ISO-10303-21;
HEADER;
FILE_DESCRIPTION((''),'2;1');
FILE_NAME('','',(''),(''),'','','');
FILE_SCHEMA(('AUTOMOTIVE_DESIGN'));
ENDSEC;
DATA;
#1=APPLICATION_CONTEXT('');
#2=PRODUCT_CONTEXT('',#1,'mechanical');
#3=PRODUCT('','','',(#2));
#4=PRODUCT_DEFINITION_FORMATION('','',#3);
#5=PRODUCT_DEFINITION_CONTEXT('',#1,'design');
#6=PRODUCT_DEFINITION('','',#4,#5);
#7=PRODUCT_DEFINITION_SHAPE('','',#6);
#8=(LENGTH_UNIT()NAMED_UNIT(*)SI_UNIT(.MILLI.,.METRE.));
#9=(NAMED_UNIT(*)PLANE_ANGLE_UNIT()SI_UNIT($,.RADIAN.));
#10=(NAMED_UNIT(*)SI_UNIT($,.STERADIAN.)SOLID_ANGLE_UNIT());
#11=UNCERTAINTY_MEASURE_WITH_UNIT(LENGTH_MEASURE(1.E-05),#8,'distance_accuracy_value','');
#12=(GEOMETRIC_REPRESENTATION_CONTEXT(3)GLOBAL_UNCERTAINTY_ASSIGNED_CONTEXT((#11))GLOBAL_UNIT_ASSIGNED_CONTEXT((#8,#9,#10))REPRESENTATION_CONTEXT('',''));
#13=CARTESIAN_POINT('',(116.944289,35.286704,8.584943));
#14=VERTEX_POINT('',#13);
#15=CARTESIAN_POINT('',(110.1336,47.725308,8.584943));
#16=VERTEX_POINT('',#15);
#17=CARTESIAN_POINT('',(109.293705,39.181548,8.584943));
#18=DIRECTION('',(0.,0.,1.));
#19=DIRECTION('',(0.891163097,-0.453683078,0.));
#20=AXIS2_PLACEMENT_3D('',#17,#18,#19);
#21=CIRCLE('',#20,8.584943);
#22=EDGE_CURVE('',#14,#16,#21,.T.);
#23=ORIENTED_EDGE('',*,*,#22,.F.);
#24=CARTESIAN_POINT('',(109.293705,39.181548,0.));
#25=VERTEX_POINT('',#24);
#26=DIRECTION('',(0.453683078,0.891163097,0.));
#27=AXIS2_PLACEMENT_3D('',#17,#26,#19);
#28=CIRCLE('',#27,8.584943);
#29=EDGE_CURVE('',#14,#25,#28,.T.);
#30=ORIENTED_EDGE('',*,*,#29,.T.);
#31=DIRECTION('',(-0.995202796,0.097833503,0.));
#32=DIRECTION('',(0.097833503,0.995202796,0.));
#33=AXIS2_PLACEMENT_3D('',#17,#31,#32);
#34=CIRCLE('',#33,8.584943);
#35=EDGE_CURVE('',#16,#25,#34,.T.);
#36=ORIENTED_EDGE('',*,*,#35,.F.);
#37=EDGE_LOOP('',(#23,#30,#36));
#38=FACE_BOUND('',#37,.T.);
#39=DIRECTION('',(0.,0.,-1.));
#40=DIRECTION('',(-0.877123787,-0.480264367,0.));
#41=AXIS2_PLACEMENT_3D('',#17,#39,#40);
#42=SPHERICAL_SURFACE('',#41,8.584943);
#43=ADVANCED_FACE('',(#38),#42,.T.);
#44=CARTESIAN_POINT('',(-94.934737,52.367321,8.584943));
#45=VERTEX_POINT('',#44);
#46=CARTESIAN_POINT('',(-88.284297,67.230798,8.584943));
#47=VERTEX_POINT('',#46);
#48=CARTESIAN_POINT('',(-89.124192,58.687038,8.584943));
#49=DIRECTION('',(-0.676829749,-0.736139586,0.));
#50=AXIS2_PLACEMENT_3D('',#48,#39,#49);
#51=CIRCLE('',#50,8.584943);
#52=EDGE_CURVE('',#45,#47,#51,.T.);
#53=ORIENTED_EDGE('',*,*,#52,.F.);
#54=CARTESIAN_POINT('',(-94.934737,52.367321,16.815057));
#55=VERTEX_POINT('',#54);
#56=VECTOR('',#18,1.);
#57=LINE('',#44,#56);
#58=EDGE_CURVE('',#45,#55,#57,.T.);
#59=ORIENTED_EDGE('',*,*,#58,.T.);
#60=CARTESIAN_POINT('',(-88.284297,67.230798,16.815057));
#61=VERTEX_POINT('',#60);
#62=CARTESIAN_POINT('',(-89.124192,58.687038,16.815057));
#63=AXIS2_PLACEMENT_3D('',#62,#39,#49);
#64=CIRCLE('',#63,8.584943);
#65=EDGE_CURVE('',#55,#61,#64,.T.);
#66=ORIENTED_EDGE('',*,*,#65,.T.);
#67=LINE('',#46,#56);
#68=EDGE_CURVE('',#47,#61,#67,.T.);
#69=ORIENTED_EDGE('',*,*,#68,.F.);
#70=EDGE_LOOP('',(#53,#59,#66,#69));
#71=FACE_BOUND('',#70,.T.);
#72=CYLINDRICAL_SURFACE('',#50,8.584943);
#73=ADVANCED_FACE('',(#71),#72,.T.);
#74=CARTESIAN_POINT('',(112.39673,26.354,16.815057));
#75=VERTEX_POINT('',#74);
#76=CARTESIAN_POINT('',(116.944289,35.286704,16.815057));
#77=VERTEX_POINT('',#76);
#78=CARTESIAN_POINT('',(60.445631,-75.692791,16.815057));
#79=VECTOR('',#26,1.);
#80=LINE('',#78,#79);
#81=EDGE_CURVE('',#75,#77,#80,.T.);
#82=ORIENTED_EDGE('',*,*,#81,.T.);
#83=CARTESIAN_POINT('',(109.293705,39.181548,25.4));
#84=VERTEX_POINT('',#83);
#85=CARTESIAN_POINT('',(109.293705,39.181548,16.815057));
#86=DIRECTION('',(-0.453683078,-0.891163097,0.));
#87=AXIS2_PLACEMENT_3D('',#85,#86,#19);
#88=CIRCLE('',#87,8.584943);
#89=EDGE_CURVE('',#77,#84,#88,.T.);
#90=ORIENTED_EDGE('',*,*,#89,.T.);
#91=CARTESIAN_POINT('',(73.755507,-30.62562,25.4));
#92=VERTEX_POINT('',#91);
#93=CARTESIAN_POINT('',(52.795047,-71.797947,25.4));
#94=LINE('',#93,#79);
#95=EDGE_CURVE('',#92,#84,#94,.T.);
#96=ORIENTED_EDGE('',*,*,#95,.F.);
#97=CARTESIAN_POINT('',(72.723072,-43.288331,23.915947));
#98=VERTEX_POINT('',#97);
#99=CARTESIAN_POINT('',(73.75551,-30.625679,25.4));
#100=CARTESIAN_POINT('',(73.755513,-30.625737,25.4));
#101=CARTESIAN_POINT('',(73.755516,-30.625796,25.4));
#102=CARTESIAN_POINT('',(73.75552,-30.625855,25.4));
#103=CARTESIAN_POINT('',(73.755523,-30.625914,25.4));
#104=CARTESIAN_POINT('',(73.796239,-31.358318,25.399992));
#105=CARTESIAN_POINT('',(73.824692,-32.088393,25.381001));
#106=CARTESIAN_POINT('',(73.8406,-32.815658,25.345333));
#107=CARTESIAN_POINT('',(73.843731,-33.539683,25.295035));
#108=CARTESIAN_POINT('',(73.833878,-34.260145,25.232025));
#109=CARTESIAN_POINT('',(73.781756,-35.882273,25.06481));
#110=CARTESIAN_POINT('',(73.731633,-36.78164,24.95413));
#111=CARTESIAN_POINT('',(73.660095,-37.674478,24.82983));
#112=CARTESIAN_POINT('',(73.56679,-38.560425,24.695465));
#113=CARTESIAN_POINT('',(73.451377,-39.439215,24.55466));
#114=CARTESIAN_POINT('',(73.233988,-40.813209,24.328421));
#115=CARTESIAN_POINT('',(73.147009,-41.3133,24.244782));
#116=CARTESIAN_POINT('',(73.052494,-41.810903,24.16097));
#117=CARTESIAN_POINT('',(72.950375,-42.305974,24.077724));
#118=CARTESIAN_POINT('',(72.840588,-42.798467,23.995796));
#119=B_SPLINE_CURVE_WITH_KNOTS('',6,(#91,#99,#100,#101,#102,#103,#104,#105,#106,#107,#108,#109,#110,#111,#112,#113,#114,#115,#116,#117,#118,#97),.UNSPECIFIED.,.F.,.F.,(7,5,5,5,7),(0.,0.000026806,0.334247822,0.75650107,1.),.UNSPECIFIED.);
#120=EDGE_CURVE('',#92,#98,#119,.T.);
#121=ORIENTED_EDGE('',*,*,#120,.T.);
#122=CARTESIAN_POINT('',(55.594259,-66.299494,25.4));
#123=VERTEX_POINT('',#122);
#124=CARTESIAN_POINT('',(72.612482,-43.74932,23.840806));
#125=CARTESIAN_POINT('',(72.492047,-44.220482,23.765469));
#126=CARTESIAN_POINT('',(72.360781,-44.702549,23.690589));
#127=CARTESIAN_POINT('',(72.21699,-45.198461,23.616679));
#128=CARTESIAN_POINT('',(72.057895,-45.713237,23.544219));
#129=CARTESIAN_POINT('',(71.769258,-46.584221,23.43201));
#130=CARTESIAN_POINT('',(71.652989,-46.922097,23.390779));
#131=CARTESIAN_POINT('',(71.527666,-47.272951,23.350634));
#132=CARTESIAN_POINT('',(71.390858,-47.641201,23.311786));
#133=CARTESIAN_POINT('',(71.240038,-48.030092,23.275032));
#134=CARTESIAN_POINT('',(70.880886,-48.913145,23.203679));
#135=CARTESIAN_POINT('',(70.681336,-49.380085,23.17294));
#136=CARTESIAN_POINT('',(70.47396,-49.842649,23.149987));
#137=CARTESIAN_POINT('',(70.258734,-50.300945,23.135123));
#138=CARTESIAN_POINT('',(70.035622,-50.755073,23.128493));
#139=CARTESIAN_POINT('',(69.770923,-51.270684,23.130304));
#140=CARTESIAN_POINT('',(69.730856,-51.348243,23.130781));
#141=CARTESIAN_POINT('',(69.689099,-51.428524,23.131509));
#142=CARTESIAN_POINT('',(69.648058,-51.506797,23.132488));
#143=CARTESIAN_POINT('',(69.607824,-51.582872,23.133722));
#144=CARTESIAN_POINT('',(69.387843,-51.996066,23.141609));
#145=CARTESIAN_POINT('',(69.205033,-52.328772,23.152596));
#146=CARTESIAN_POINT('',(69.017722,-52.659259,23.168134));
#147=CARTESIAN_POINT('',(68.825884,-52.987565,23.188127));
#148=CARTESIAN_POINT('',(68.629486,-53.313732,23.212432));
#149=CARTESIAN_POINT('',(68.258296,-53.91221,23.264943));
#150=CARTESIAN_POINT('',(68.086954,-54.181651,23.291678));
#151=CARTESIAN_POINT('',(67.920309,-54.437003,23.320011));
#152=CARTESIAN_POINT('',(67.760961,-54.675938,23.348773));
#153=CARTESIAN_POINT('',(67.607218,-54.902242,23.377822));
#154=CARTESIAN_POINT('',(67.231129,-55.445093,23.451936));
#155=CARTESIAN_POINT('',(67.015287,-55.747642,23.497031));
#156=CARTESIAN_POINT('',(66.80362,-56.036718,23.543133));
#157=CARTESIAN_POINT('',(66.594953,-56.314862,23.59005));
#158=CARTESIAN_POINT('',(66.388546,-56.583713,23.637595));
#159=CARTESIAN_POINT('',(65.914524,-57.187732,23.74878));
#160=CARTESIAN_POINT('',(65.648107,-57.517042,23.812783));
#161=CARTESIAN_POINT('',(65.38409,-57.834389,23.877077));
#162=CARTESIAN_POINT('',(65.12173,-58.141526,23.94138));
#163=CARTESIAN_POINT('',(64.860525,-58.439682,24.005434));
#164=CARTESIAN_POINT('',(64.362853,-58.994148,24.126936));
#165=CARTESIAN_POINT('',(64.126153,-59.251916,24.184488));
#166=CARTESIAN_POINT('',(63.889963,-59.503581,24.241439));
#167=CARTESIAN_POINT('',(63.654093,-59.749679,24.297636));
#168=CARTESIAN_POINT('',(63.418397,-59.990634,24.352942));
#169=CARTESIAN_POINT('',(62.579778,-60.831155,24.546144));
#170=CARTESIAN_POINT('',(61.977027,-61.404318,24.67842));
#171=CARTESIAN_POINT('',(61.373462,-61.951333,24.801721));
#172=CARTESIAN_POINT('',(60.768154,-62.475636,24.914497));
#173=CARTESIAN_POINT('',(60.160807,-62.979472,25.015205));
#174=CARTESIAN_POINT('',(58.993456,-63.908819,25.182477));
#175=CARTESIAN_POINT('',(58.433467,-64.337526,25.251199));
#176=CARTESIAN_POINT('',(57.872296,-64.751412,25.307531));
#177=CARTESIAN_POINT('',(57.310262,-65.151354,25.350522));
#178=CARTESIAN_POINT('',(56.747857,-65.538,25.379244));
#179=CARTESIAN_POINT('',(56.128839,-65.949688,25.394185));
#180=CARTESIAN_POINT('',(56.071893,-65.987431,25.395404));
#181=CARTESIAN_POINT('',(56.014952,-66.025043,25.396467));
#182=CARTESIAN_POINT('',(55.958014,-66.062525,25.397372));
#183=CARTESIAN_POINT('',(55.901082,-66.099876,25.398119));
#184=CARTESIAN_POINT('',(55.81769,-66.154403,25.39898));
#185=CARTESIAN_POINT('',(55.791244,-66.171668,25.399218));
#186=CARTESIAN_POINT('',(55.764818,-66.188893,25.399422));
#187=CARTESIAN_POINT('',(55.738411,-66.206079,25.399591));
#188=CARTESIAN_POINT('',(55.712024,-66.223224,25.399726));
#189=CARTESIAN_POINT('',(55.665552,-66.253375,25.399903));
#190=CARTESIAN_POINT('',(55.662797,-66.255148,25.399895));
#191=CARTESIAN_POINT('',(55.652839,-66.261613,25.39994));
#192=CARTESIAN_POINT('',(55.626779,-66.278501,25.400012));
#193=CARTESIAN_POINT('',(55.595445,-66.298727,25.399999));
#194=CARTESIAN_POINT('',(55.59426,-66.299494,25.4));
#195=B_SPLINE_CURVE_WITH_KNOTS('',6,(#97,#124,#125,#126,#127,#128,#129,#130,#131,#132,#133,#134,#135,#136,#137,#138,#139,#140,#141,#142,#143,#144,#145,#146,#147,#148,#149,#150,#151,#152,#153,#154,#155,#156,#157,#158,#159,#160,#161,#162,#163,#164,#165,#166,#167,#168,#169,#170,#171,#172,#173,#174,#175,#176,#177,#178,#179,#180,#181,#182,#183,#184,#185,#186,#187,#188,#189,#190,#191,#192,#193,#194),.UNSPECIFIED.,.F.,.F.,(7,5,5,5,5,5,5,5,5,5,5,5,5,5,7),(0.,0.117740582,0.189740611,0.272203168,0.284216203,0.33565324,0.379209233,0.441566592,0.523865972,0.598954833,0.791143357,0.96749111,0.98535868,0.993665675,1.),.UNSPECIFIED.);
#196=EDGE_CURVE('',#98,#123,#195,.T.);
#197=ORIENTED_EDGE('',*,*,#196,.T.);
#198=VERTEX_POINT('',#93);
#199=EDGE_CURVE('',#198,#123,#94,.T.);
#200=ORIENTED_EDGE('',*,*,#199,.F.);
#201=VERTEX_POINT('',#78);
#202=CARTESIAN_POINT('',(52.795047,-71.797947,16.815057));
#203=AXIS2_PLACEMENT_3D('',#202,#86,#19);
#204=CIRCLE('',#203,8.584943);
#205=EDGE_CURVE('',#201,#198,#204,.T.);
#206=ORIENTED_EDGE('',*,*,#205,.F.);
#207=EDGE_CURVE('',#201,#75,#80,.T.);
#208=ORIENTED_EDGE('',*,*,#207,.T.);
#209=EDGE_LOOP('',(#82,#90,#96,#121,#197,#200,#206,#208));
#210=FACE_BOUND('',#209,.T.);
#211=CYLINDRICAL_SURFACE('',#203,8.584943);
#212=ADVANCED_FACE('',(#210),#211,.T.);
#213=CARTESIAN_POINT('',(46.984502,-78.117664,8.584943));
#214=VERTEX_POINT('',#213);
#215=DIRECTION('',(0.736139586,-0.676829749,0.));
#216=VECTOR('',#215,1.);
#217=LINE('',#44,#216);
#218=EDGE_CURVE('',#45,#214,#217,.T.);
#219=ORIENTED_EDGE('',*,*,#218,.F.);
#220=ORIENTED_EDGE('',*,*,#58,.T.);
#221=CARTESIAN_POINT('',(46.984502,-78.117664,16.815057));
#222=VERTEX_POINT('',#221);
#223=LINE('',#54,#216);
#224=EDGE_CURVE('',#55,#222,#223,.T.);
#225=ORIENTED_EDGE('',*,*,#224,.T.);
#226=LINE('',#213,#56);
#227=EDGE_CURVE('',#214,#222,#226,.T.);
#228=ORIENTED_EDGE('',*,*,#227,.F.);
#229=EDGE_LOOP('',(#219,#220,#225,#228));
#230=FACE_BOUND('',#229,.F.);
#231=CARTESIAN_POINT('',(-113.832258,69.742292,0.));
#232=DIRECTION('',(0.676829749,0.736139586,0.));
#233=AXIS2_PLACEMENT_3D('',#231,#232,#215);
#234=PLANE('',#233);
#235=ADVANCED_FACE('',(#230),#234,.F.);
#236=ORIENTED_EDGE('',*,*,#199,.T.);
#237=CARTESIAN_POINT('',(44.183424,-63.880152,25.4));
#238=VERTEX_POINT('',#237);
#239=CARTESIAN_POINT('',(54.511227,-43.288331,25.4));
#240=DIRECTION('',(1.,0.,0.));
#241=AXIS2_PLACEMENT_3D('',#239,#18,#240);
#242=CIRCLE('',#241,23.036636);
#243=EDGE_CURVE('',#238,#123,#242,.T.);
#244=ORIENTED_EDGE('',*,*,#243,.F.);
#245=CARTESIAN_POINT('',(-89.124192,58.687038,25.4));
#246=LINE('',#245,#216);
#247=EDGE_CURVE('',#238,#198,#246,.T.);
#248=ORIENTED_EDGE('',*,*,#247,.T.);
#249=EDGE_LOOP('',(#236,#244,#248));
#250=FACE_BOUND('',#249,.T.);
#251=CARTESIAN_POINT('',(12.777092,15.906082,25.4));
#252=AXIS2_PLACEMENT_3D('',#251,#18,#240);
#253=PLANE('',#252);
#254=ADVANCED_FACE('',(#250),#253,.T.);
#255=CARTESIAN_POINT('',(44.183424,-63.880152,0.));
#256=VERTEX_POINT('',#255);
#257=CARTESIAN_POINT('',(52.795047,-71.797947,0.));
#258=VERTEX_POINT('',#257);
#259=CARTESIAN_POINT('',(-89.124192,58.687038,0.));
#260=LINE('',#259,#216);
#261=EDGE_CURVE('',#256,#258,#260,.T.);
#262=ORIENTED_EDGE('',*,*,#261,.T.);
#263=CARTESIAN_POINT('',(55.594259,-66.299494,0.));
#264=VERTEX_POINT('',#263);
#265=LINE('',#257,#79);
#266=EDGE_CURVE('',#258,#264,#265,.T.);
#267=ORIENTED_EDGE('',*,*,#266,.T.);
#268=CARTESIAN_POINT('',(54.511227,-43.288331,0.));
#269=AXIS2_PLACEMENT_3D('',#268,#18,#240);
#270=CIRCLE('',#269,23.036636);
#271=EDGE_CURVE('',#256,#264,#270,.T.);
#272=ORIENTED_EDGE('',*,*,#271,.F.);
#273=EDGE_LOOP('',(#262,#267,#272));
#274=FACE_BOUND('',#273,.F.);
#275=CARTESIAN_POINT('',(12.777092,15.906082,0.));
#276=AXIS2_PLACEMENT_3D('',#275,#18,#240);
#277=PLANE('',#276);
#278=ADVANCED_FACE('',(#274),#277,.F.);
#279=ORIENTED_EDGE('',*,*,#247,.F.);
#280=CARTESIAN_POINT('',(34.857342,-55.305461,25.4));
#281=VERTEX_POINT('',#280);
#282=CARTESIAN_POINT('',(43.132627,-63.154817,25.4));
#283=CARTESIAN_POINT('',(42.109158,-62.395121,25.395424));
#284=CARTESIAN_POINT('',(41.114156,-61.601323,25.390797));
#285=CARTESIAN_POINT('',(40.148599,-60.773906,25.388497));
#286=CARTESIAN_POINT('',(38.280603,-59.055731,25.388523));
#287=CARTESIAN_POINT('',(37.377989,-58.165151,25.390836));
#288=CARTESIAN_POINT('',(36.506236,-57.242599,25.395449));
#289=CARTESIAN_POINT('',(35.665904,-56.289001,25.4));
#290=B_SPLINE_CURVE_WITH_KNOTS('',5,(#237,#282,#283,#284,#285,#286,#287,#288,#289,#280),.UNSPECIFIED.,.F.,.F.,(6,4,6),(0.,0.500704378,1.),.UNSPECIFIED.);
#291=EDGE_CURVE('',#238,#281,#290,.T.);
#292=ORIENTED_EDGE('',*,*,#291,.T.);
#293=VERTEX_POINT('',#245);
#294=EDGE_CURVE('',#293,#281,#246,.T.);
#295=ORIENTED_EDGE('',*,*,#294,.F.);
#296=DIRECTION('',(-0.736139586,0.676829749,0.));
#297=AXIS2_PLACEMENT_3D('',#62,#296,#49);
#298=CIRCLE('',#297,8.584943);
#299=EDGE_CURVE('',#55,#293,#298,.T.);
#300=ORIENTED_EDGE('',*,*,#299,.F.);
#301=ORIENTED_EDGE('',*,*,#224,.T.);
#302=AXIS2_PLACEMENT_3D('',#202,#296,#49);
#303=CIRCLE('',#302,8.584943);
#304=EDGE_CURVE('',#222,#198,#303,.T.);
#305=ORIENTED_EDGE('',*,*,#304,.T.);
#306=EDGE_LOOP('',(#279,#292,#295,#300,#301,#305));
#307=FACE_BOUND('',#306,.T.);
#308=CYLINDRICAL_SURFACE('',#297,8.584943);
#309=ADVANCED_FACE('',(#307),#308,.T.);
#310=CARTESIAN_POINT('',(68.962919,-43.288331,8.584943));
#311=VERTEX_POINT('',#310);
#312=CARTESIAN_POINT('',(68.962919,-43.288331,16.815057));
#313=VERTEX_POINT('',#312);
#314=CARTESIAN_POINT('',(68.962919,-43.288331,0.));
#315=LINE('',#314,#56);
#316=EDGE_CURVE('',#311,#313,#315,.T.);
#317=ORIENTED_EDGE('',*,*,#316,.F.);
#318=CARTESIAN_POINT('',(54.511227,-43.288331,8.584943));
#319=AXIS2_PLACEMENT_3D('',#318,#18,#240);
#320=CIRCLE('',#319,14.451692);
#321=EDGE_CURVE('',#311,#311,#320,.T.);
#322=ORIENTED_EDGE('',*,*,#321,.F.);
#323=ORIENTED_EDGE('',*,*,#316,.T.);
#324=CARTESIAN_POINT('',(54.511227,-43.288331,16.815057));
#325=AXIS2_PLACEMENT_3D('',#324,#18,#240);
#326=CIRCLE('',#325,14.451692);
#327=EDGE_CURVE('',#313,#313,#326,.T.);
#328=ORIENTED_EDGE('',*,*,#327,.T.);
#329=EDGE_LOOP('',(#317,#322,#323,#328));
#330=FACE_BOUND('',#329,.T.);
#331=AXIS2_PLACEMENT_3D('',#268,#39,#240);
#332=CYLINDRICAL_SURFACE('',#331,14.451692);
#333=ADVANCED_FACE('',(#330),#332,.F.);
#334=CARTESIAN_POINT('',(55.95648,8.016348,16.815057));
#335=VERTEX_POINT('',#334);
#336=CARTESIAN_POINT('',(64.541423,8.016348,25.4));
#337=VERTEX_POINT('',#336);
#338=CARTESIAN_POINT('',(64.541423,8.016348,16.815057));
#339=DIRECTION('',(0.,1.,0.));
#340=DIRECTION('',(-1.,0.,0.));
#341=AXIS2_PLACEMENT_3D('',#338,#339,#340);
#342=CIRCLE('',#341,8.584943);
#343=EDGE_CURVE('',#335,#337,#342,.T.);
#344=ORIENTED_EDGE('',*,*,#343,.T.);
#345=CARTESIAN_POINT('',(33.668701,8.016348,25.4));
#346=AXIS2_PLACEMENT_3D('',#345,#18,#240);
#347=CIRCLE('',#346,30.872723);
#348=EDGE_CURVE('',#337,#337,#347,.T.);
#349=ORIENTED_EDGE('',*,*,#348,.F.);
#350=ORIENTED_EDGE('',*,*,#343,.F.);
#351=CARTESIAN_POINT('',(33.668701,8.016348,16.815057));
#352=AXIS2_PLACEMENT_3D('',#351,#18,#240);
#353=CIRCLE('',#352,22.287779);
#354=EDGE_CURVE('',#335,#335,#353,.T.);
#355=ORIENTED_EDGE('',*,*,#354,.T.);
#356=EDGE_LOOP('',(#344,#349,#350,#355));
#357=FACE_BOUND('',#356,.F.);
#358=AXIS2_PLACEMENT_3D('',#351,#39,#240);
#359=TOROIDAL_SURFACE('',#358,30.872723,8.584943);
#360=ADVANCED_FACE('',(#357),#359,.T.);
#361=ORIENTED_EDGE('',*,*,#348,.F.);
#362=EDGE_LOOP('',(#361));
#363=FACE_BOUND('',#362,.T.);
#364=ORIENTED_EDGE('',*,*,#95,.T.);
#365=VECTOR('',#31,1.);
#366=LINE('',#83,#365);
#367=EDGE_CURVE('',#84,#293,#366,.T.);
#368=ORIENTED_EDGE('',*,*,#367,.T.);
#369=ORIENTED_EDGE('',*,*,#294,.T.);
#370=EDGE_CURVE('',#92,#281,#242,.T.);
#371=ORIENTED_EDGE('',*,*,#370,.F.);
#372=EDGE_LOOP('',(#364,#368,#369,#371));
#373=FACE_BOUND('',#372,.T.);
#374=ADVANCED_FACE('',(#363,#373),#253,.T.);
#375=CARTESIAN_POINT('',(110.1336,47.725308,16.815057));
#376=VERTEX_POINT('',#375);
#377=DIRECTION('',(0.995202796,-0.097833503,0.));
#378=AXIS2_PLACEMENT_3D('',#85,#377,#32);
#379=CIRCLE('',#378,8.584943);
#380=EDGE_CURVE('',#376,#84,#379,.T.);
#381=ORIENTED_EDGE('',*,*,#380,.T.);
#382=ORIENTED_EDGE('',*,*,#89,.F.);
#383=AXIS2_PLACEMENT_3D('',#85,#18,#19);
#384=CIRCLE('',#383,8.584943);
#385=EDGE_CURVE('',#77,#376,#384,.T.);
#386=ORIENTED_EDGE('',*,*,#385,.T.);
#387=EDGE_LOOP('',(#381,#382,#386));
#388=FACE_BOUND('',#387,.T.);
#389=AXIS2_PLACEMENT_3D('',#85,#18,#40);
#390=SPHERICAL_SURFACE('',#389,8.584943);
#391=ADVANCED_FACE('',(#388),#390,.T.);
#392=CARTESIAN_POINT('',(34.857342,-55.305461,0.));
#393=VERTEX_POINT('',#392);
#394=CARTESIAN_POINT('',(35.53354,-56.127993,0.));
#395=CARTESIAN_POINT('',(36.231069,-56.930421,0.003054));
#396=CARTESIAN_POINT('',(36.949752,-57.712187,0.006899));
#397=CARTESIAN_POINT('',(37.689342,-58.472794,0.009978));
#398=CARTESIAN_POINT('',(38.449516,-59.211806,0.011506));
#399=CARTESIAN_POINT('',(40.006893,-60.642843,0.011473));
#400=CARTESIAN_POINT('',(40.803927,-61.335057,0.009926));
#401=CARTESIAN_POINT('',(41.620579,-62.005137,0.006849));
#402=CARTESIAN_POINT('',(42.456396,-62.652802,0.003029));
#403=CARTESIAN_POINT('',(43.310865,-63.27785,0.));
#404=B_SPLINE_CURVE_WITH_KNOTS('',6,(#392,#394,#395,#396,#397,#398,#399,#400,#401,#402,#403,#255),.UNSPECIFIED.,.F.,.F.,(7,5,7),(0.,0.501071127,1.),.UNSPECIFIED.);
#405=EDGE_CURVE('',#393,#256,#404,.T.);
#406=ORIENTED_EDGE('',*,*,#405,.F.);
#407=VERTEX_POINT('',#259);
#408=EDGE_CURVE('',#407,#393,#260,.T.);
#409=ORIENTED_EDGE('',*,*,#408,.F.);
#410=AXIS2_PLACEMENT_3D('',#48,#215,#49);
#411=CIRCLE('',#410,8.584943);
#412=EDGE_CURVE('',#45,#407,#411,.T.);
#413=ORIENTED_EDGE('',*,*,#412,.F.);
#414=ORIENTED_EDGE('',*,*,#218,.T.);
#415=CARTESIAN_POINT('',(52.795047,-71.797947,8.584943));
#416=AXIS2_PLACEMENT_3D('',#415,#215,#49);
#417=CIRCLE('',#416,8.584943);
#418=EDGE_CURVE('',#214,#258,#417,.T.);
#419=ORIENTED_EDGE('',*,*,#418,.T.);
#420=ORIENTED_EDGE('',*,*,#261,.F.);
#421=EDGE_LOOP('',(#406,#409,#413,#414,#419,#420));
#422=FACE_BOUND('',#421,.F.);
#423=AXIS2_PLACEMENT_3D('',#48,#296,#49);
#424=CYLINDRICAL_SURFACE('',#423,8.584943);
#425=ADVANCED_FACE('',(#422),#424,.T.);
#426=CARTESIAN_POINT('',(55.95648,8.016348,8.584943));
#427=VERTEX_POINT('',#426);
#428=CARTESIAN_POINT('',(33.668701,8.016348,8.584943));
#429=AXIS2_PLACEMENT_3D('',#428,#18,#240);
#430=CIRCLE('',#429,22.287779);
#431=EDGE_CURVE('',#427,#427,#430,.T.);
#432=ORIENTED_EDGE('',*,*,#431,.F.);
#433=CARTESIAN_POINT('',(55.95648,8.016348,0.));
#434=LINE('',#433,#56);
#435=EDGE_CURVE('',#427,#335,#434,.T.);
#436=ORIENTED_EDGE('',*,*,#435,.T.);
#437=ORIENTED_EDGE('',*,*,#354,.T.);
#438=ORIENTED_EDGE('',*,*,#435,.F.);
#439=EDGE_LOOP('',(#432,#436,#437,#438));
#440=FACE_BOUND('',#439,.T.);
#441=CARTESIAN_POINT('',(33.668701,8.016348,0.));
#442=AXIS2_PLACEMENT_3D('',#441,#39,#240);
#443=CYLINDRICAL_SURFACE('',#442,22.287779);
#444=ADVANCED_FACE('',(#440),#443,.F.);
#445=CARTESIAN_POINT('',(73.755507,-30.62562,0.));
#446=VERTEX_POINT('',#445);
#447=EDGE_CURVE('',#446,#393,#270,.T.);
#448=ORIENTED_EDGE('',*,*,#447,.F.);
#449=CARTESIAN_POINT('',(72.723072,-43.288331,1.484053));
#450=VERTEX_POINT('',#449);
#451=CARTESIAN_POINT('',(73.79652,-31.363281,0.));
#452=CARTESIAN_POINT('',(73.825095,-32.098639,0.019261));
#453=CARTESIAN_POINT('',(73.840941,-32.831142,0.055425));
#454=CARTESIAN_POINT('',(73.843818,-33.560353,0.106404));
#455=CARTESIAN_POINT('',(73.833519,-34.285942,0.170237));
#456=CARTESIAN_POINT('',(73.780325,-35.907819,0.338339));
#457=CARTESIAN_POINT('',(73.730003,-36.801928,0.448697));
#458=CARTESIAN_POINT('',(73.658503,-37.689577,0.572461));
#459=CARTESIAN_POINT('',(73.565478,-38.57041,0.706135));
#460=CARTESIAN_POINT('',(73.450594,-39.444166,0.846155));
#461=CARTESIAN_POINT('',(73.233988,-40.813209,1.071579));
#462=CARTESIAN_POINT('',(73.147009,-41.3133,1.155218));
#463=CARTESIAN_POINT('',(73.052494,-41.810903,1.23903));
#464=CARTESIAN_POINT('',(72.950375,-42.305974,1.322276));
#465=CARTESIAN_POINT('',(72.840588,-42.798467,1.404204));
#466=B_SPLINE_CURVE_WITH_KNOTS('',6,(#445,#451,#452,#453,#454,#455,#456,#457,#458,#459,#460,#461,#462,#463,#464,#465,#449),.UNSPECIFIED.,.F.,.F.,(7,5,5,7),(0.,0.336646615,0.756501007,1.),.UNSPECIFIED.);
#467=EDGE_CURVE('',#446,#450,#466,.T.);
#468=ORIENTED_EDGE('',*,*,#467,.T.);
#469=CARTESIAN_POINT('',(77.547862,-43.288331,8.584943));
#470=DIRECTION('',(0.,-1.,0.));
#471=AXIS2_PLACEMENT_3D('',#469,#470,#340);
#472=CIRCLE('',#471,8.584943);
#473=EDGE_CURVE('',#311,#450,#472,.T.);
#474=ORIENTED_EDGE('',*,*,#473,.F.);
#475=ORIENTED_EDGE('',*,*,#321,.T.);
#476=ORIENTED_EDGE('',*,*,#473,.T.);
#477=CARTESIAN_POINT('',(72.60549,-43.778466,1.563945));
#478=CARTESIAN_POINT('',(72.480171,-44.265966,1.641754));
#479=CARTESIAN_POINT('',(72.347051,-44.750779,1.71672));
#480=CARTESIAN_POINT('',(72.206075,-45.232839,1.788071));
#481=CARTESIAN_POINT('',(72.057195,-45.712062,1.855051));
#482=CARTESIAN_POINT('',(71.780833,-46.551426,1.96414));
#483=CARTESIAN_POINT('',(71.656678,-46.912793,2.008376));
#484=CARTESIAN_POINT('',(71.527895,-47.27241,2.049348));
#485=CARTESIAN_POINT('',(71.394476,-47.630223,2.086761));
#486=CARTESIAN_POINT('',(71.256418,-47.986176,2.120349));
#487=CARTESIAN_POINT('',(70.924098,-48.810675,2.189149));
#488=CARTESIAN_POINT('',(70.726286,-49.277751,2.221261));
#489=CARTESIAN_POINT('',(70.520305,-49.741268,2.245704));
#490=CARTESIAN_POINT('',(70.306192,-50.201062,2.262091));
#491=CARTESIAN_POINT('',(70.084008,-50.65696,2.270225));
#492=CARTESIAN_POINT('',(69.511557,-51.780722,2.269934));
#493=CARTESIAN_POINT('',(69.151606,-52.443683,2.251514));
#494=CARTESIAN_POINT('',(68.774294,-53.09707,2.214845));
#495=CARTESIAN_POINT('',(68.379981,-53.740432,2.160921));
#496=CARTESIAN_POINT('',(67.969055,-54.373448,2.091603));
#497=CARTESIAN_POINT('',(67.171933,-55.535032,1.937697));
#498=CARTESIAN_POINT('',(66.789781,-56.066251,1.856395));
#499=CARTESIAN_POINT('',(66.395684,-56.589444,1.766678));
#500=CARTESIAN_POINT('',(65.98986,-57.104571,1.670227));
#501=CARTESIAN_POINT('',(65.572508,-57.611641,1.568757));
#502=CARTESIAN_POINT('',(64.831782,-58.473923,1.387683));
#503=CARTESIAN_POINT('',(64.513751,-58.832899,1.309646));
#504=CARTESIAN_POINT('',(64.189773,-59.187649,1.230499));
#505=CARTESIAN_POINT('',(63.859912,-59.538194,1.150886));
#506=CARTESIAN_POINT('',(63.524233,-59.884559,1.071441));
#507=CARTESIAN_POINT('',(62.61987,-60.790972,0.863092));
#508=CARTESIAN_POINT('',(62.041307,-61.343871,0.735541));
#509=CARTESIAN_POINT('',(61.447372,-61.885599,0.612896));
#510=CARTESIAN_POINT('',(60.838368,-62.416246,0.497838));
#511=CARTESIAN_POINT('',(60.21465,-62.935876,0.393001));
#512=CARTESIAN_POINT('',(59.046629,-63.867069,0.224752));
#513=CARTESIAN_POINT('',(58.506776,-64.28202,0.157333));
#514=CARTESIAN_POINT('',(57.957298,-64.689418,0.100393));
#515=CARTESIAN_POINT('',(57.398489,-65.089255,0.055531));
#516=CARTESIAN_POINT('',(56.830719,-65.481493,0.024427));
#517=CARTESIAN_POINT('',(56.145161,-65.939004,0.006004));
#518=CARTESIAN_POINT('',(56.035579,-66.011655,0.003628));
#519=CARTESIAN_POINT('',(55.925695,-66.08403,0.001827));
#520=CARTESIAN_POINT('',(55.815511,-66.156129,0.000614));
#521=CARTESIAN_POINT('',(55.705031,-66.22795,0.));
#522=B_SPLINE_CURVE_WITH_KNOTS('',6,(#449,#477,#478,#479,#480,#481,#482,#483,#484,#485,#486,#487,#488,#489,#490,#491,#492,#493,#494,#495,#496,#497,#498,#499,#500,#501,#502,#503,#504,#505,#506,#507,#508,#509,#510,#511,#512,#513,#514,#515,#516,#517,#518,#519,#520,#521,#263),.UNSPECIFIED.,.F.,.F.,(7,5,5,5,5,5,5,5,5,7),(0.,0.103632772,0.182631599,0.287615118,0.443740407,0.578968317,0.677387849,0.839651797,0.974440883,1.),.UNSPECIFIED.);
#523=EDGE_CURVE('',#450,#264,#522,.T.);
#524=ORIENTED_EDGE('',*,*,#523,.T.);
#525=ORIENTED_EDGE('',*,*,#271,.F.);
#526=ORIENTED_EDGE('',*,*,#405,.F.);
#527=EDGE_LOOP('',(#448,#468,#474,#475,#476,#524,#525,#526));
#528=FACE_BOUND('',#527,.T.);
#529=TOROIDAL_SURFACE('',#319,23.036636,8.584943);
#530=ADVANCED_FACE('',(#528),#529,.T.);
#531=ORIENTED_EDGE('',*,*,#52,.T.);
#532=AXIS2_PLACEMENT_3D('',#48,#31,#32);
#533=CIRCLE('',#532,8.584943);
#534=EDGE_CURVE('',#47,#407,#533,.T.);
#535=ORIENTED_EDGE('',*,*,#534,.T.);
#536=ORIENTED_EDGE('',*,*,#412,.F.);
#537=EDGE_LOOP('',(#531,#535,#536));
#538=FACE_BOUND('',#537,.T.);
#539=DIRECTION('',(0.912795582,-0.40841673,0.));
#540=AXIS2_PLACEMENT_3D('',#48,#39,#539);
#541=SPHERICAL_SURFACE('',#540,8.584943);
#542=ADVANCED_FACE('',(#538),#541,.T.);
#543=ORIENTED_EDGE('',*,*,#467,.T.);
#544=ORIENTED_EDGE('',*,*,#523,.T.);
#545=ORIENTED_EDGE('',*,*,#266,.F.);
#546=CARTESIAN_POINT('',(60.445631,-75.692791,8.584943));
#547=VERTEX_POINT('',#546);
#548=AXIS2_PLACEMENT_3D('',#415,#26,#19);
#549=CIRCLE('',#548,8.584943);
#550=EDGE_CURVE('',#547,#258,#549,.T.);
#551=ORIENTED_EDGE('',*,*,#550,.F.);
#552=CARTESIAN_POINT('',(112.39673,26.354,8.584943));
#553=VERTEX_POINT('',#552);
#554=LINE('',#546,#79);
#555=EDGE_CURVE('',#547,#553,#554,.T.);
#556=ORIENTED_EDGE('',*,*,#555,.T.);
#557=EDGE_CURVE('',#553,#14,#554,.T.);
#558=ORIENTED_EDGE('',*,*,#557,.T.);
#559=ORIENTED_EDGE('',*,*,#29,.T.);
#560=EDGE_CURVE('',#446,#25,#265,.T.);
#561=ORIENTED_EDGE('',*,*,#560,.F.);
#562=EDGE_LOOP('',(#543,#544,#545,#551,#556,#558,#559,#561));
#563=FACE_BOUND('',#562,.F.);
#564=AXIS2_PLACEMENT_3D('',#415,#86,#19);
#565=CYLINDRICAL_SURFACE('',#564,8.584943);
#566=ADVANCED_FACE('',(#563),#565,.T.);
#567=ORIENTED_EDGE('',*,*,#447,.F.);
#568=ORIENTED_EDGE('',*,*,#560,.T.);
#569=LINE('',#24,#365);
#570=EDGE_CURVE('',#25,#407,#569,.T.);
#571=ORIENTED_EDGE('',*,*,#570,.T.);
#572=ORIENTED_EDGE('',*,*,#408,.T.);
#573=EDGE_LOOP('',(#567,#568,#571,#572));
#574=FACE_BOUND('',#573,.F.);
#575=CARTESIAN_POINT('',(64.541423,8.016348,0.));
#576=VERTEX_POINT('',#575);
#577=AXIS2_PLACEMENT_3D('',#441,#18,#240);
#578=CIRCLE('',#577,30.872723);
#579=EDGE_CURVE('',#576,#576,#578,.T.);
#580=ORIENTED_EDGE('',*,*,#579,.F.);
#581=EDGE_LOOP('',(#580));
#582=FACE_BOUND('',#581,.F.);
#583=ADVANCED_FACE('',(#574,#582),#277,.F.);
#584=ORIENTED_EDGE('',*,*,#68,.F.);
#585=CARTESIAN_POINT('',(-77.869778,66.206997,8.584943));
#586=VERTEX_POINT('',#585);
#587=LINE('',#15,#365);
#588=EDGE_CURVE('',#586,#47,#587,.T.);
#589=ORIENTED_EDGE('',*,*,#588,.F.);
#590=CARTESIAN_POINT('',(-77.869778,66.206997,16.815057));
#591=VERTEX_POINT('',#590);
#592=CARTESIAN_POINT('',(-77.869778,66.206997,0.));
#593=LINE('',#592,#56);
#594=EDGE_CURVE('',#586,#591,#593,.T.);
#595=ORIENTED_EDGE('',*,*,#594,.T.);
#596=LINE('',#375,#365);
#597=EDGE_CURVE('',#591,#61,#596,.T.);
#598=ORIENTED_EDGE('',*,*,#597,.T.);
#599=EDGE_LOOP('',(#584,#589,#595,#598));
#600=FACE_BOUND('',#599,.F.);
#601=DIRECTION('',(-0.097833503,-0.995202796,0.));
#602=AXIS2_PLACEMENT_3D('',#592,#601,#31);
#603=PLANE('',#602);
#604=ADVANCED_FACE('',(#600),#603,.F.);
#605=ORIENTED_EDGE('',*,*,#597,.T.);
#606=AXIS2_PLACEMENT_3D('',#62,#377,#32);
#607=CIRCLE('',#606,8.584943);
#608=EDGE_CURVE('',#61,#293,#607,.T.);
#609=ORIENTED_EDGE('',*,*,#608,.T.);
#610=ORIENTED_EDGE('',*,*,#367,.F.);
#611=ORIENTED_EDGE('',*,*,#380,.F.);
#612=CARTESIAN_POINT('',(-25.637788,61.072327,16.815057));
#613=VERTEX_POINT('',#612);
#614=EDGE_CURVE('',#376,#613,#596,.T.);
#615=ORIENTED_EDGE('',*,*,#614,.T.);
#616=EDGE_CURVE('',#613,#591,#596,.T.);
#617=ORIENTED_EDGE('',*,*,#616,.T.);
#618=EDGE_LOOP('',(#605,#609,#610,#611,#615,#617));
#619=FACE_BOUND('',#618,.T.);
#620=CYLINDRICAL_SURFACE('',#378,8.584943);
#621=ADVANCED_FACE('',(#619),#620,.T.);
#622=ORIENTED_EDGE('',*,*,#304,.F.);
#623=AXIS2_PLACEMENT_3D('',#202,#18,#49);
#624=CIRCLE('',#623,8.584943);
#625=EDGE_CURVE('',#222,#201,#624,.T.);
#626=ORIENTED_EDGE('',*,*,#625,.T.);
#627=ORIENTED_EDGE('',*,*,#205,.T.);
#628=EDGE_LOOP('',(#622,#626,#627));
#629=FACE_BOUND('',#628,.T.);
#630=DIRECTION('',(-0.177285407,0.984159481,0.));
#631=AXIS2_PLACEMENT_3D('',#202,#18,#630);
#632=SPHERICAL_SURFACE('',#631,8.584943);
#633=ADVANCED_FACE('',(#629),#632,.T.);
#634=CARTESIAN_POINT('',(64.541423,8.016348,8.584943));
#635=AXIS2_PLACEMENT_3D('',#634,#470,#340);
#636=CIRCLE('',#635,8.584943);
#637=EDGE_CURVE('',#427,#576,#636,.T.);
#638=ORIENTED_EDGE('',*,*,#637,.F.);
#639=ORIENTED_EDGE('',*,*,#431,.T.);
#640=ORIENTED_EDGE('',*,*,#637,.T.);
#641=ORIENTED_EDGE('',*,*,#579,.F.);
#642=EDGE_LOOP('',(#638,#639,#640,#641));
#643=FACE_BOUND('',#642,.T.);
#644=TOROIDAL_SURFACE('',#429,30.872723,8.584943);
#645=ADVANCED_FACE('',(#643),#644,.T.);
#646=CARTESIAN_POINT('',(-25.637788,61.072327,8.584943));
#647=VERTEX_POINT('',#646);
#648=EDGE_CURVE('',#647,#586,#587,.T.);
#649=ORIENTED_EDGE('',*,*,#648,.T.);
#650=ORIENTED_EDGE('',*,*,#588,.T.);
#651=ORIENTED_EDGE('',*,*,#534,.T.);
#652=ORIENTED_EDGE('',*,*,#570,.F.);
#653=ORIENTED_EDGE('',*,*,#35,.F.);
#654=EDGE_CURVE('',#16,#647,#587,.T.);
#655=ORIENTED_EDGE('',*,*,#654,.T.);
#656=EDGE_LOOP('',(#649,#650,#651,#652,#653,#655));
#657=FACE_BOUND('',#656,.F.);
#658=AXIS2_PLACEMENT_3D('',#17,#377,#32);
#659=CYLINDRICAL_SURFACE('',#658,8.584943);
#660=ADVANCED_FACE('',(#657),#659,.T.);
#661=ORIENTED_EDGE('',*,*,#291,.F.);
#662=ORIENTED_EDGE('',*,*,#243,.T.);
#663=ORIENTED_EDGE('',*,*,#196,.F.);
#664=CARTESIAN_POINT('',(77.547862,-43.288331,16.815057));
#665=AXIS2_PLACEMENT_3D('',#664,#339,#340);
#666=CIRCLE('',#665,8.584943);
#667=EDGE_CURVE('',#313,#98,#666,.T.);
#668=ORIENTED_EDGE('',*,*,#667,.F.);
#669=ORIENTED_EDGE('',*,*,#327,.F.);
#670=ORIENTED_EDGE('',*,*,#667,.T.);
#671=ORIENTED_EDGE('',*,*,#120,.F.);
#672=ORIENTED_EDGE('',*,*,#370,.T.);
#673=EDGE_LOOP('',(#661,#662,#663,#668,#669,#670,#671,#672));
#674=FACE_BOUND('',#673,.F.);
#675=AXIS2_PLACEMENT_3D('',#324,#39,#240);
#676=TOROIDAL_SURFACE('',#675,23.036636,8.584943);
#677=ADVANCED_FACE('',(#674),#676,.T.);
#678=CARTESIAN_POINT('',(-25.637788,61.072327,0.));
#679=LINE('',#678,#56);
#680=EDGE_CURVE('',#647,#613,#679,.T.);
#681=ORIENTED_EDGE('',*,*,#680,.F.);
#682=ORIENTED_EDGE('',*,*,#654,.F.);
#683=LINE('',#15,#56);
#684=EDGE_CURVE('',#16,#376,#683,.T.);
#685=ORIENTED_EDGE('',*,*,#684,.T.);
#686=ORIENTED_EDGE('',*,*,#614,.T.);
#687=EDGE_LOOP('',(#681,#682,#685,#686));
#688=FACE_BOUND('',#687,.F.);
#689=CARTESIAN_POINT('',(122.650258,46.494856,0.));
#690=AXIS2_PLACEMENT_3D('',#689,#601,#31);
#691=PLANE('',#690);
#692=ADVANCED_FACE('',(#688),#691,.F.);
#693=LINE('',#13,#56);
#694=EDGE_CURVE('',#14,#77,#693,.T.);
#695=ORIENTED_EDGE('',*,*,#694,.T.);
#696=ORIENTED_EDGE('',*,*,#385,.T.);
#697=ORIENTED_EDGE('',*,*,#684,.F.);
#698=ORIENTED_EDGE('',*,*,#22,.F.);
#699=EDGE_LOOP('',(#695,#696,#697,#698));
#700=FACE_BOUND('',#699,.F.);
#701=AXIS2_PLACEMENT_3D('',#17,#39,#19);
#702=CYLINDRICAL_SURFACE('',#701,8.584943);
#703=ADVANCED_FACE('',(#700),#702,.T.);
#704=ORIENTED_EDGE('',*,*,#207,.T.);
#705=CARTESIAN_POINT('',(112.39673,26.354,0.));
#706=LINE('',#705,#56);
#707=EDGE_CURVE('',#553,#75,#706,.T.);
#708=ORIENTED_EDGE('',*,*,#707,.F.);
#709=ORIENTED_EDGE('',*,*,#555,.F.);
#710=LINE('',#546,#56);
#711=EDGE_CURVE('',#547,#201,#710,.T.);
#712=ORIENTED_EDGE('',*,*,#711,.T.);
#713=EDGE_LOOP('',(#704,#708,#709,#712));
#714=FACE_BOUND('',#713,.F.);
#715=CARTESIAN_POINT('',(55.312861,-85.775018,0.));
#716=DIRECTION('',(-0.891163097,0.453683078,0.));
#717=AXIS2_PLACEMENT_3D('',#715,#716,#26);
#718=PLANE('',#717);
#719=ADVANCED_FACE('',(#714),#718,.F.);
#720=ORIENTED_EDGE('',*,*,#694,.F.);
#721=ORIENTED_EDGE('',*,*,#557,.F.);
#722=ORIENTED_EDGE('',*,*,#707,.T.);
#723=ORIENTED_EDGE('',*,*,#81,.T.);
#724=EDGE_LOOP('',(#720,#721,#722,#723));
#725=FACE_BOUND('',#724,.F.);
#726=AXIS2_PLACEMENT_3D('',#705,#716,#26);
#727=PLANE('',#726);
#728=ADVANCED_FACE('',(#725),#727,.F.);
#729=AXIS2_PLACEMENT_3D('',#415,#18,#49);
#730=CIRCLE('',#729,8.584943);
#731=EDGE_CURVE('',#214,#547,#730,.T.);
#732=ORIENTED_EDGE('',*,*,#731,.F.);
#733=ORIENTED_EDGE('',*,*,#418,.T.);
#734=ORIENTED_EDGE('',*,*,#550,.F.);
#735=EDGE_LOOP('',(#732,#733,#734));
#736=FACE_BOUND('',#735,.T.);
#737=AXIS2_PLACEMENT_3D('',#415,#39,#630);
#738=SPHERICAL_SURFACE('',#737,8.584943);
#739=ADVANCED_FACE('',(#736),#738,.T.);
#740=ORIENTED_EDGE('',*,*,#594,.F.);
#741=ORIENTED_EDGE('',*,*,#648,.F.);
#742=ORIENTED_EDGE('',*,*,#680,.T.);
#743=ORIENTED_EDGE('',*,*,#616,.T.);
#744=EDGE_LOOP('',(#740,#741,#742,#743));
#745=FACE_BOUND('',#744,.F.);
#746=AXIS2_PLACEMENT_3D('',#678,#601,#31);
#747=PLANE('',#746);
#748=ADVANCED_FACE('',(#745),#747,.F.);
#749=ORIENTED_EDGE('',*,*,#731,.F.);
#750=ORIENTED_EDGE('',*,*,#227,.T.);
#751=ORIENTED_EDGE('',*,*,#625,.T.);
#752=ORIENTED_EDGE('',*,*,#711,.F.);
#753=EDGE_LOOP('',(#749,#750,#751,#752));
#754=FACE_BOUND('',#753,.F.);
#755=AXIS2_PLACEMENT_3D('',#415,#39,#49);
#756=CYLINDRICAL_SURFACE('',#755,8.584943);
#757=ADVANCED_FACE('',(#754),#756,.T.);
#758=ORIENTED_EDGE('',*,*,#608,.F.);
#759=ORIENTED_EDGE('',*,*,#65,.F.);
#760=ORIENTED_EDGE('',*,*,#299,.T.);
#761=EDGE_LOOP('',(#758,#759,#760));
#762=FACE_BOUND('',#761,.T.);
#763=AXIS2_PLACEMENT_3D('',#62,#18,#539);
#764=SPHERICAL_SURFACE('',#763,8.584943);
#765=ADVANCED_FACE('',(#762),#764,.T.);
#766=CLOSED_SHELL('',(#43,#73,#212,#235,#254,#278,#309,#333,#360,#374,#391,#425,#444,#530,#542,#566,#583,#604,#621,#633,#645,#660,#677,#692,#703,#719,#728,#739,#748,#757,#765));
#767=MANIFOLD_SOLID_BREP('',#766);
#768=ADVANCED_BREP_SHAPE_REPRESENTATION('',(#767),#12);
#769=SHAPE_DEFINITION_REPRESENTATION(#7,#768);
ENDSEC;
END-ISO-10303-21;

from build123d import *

# Parameters (mm, degrees)
F0_R         = 14.451692169
F0_R_2       = 22.2877793756
F1_DEPTH     = 25.4
F2_T1_DEPTH  = 199.3743361021
F2_T3_DEPTH  = 192.7884894302
F2_T5_DEPTH  = 8.2301131444
F2_T7_DEPTH  = 124.5333156844
F2_T12_DEPTH = 8.5849434278
F2_T18_DEPTH = 8.5849434278
F2_T24_DEPTH = 8.5849434278
F2_T30_DEPTH = 8.5849434278
F2_T36_DEPTH = 8.5849434278
F2_T42_DEPTH = 8.5849434278


# Not quite as in the source:
# - a fillet or chamfer that OpenCascade refuses, or shapes differently, is made with other operations: its cross-section is extruded or revolved along the edge and cut away or added


with BuildPart() as f1:
    # F0 (on Top) → F1 (new body)
    with BuildSketch(Plane.XY):
        with BuildLine():
            Line((-113.832257688, 69.7422921658), (55.3128607571, -85.7750177383))
            Line((55.3128607571, -85.7750177383), (98.9801470389, 0))
            ThreePointArc((98.9801470389, 0), (88.9042904179, 21.7216579157), (112.3967300467, 26.3539996064))
            Line((112.3967300467, 26.3539996064), (122.6502582431, 46.4948564768))
            Line((122.6502582431, 46.4948564768), (4.4090002775, 58.1185743213))
            ThreePointArc((4.4090002775, 58.1185743213), (-12.006964874, 45.4296421416), (-25.6377878195, 61.0723266154))
            Line((-25.6377878195, 61.0723266154), (-77.869777953, 66.2069972558))
            ThreePointArc((-77.869777953, 66.2069972558), (-87.4993555937, 58.3520393661), (-95.4150132583, 67.9317832418))
            Line((-95.4150132583, 67.9317832418), (-113.832257688, 69.7422921658))
        make_face()
        with Locations((54.5112267137, -43.2883314788)):
            Circle(F0_R, mode=Mode.SUBTRACT)
        with Locations((33.6687006056, 8.0163478851)):
            Circle(F0_R_2, mode=Mode.SUBTRACT)
        with BuildLine():
            ThreePointArc((112.3967300467, 26.3539996064), (88.9042904179, 21.7216579157), (98.9801470389, 0))
            Line((98.9801470389, 0), (112.3967300467, 26.3539996064))
        make_face()
        with BuildLine():
            Line((-77.869777953, 66.2069972558), (-95.4150132583, 67.9317832418))
            ThreePointArc((-95.4150132583, 67.9317832418), (-87.4993555937, 58.3520393661), (-77.869777953, 66.2069972558))
        make_face()
        with BuildLine():
            ThreePointArc((-25.6377878195, 61.0723266154), (-12.006964874, 45.4296421416), (4.4090002775, 58.1185743213))
            Line((4.4090002775, 58.1185743213), (-25.6377878195, 61.0723266154))
        make_face()
    extrude(amount=F1_DEPTH)

    # F2: fillet of radius 8.5849434278 on 15 edges, made by hand

    # F2_s2 → F2_t1 (cut)
    with BuildSketch(Plane(origin=(104.4327323095, -10.2662694476, 0), x_dir=(0, 0, 1), z_dir=(-0.9952027962, 0.0978335033, 0))):
        with BuildLine():
            ThreePointArc((16.8150565722, 58.2711156209), (22.8855282861, 55.756643907), (25.4, 49.6861721931))
            Line((25.4, 49.6861721931), (25.4, 58.2711156209))
            Line((25.4, 58.2711156209), (16.8150565722, 58.2711156209))
        make_face()
        with BuildLine():
            ThreePointArc((8.5849434278, 58.2711156209), (2.5144717139, 55.756643907), (0, 49.6861721931))
            Line((0, 49.6861721931), (0, 58.2711156209))
            Line((0, 58.2711156209), (8.5849434278, 58.2711156209))
        make_face()
    extrude(amount=F2_T1_DEPTH, mode=Mode.SUBTRACT)

    # F2_s4 → F2_t3 (cut)
    with BuildSketch(Plane(origin=(-77.5368310442, 71.289786506, 0), x_dir=(0, 0, 1), z_dir=(0.7361395861, -0.6768297495, 0))):
        with BuildLine():
            ThreePointArc((16.8150565722, 25.7049963658), (22.8855282861, 23.1905246519), (25.4, 17.120052938))
            Line((25.4, 17.120052938), (25.4, 25.7049963658))
            Line((25.4, 25.7049963658), (16.8150565722, 25.7049963658))
        make_face()
        with BuildLine():
            ThreePointArc((8.5849434278, 25.7049963658), (2.5144717139, 23.1905246519), (0, 17.120052938))
            Line((0, 17.120052938), (0, 25.7049963658))
            Line((0, 25.7049963658), (8.5849434278, 25.7049963658))
        make_face()
    extrude(amount=F2_T3_DEPTH, mode=Mode.SUBTRACT)

    # F2_s6 → F2_t5 (cut)
    with BuildSketch(Plane.XY.offset(8.5849434278)):
        with BuildLine():
            ThreePointArc((-94.9347372949, 52.3673211207), (-96.9604906178, 62.1932723461), (-88.2842970942, 67.2307975271))
            Line((-88.2842970942, 67.2307975271), (-113.832257688, 69.7422921658))
            Line((-113.832257688, 69.7422921658), (-94.9347372949, 52.3673211207))
        make_face()
        with BuildLine():
            ThreePointArc((46.9845015181, -78.1176638834), (54.3170318204, -80.2469006514), (60.4456313968, -75.6927907406))
            Line((60.4456313968, -75.6927907406), (55.3128607571, -85.7750177383))
            Line((55.3128607571, -85.7750177383), (46.9845015181, -78.1176638834))
        make_face()
        with BuildLine():
            ThreePointArc((116.94428937, 35.2867044944), (116.8237626916, 43.3045904742), (110.1335996919, 47.725307758))
            Line((110.1335996919, 47.725307758), (122.6502582431, 46.4948564768))
            Line((122.6502582431, 46.4948564768), (116.94428937, 35.2867044944))
        make_face()
    extrude(amount=F2_T5_DEPTH, mode=Mode.SUBTRACT)

    # F2_s8 → F2_t7 (cut)
    with BuildSketch(Plane(origin=(-18.161596753, -35.6745613546, 0), x_dir=(0, 0, 1), z_dir=(0.453683078, 0.8911630966, 0))):
        with BuildLine():
            ThreePointArc((8.5849434278, 88.2074543369), (2.5144717139, 85.692982623), (0, 79.6225109091))
            Line((0, 79.6225109091), (0, 88.2074543369))
            Line((0, 88.2074543369), (8.5849434278, 88.2074543369))
        make_face()
        with BuildLine():
            ThreePointArc((16.8150565722, 88.2074543369), (22.8855282861, 85.692982623), (25.4, 79.6225109091))
            Line((25.4, 79.6225109091), (25.4, 88.2074543369))
            Line((25.4, 88.2074543369), (16.8150565722, 88.2074543369))
        make_face()
    extrude(amount=F2_T7_DEPTH, mode=Mode.SUBTRACT)


with BuildPart() as f2_tool10:
    # F2_s11 → F2_t12 (new body)
    with BuildSketch(Plane.XY.offset(16.8150565722)):
        Polygon((109.2937046007, 39.1815480531), (116.94428937, 35.2867044944), (122.6502582431, 46.4948564768), (110.1335996919, 47.725307758), align=None)
    extrude(amount=F2_T12_DEPTH)

    # F2_s13 → F2_t14 (revolve, cut)
    with BuildSketch(Plane(origin=(109.2937046007, 39.1815480531, 16.8150565722), x_dir=(-0.877123787, -0.480264367, 0), z_dir=(-0.480264367, 0.877123787, 0))):
        with BuildLine():
            ThreePointArc((0, -8.5849434278), (8.5849434278, 0), (0, 8.5849434278))
            Line((0, 8.5849434278), (0, -8.5849434278))
        make_face()
    revolve(axis=Axis((109.2937046007, 39.1815480531, 16.8150565722), (0, 0, 1)), mode=Mode.SUBTRACT)


with BuildPart() as f1_1:
    add(f1.part)

    # F2_t9: cut F2_tool10
    add(f2_tool10.part, mode=Mode.SUBTRACT)


with BuildPart() as f2_tool16:
    # F2_s17 → F2_t18 (new body)
    with BuildSketch(Plane.XY.offset(16.8150565722)):
        Polygon((-89.1241921853, 58.6870378223), (-94.9347372949, 52.3673211207), (-113.832257688, 69.7422921658), (-88.2842970942, 67.2307975271), align=None)
    extrude(amount=F2_T18_DEPTH)

    # F2_s19 → F2_t20 (revolve, cut)
    with BuildSketch(Plane(origin=(-89.1241921853, 58.6870378223, 16.8150565722), x_dir=(0.912795582, -0.4084167302, 0), z_dir=(-0.4084167302, -0.912795582, 0))):
        with BuildLine():
            ThreePointArc((0, -8.5849434278), (8.5849434278, 0), (0, 8.5849434278))
            Line((0, 8.5849434278), (0, -8.5849434278))
        make_face()
    revolve(axis=Axis((-89.1241921853, 58.6870378223, 16.8150565722), (0, 0, 1)), mode=Mode.SUBTRACT)


with BuildPart() as f1_2:
    add(f1_1.part)

    # F2_t15: cut F2_tool16
    add(f2_tool16.part, mode=Mode.SUBTRACT)


with BuildPart() as f2_tool22:
    # F2_s23 → F2_t24 (new body)
    with BuildSketch(Plane.XY.offset(16.8150565722)):
        Polygon((52.7950466276, -71.7979471818), (46.9845015181, -78.1176638834), (55.3128607571, -85.7750177383), (60.4456313968, -75.6927907406), align=None)
    extrude(amount=F2_T24_DEPTH)

    # F2_s25 → F2_t26 (revolve, cut)
    with BuildSketch(Plane(origin=(52.7950466276, -71.7979471818, 16.8150565722), x_dir=(-0.1772854074, 0.9841594811, 0), z_dir=(0.9841594811, 0.1772854074, 0))):
        with BuildLine():
            ThreePointArc((0, -8.5849434278), (8.5849434278, 0), (0, 8.5849434278))
            Line((0, 8.5849434278), (0, -8.5849434278))
        make_face()
    revolve(axis=Axis((52.7950466276, -71.7979471818, 16.8150565722), (0, 0, 1)), mode=Mode.SUBTRACT)


with BuildPart() as f1_3:
    add(f1_2.part)

    # F2_t21: cut F2_tool22
    add(f2_tool22.part, mode=Mode.SUBTRACT)


with BuildPart() as f2_tool28:
    # F2_s29 → F2_t30 (new body)
    with BuildSketch(Plane.XY.offset(8.5849434278)):
        Polygon((-89.1241921853, 58.6870378223), (-94.9347372949, 52.3673211207), (-113.832257688, 69.7422921658), (-88.2842970942, 67.2307975271), align=None)
    extrude(amount=-F2_T30_DEPTH)

    # F2_s31 → F2_t32 (revolve, cut)
    with BuildSketch(Plane(origin=(-89.1241921853, 58.6870378223, 8.5849434278), x_dir=(0.912795582, -0.4084167302, 0), z_dir=(0.4084167302, 0.912795582, 0))):
        with BuildLine():
            ThreePointArc((0, -8.5849434278), (8.5849434278, 0), (0, 8.5849434278))
            Line((0, 8.5849434278), (0, -8.5849434278))
        make_face()
    revolve(axis=Axis((-89.1241921853, 58.6870378223, 8.5849434278), (0, 0, -1)), mode=Mode.SUBTRACT)


with BuildPart() as f1_4:
    add(f1_3.part)

    # F2_t27: cut F2_tool28
    add(f2_tool28.part, mode=Mode.SUBTRACT)


with BuildPart() as f2_tool34:
    # F2_s35 → F2_t36 (new body)
    with BuildSketch(Plane.XY.offset(8.5849434278)):
        Polygon((52.7950466276, -71.7979471818), (46.9845015181, -78.1176638834), (55.3128607571, -85.7750177383), (60.4456313968, -75.6927907406), align=None)
    extrude(amount=-F2_T36_DEPTH)

    # F2_s37 → F2_t38 (revolve, cut)
    with BuildSketch(Plane(origin=(52.7950466276, -71.7979471818, 8.5849434278), x_dir=(-0.1772854074, 0.9841594811, 0), z_dir=(-0.9841594811, -0.1772854074, 0))):
        with BuildLine():
            ThreePointArc((0, -8.5849434278), (8.5849434278, 0), (0, 8.5849434278))
            Line((0, 8.5849434278), (0, -8.5849434278))
        make_face()
    revolve(axis=Axis((52.7950466276, -71.7979471818, 8.5849434278), (0, 0, -1)), mode=Mode.SUBTRACT)


with BuildPart() as f1_5:
    add(f1_4.part)

    # F2_t33: cut F2_tool34
    add(f2_tool34.part, mode=Mode.SUBTRACT)


with BuildPart() as f2_tool40:
    # F2_s41 → F2_t42 (new body)
    with BuildSketch(Plane.XY.offset(8.5849434278)):
        Polygon((109.2937046007, 39.1815480531), (116.94428937, 35.2867044944), (122.6502582431, 46.4948564768), (110.1335996919, 47.725307758), align=None)
    extrude(amount=-F2_T42_DEPTH)

    # F2_s43 → F2_t44 (revolve, cut)
    with BuildSketch(Plane(origin=(109.2937046007, 39.1815480531, 8.5849434278), x_dir=(-0.877123787, -0.480264367, 0), z_dir=(0.480264367, -0.877123787, 0))):
        with BuildLine():
            ThreePointArc((0, -8.5849434278), (8.5849434278, 0), (0, 8.5849434278))
            Line((0, 8.5849434278), (0, -8.5849434278))
        make_face()
    revolve(axis=Axis((109.2937046007, 39.1815480531, 8.5849434278), (0, 0, -1)), mode=Mode.SUBTRACT)


with BuildPart() as f1_6:
    add(f1_5.part)

    # F2_t39: cut F2_tool40
    add(f2_tool40.part, mode=Mode.SUBTRACT)

    # F2_s45 → F2_t46 (revolve, cut)
    with BuildSketch(Plane.XZ.offset(43.2883314788)):
        with BuildLine():
            ThreePointArc((68.9629188827, 8.5849434278), (71.4773905966, 2.5144717139), (77.5478623105, 0))
            Line((77.5478623105, 0), (68.9629188827, 0))
            Line((68.9629188827, 0), (68.9629188827, 8.5849434278))
        make_face()
    revolve(axis=Axis((54.5112267137, -43.2883314788, 0), (0, 0, 1)), mode=Mode.SUBTRACT)

    # F2_s47 → F2_t48 (revolve, cut)
    with BuildSketch(Plane.XZ.offset(-8.0163478851)):
        with BuildLine():
            ThreePointArc((55.9564799812, 8.5849434278), (58.4709516951, 2.5144717139), (64.541423409, 0))
            Line((64.541423409, 0), (55.9564799812, 0))
            Line((55.9564799812, 0), (55.9564799812, 8.5849434278))
        make_face()
    revolve(axis=Axis((33.6687006056, 8.0163478851, 0), (0, 0, 1)), mode=Mode.SUBTRACT)

    # F2_s49 → F2_t50 (revolve, cut)
    with BuildSketch(Plane.XZ.offset(43.2883314788)):
        with BuildLine():
            ThreePointArc((68.9629188827, 16.8150565722), (71.4773905966, 22.8855282861), (77.5478623105, 25.4))
            Line((77.5478623105, 25.4), (68.9629188827, 25.4))
            Line((68.9629188827, 25.4), (68.9629188827, 16.8150565722))
        make_face()
    revolve(axis=Axis((54.5112267137, -43.2883314788, 25.4), (0, 0, 1)), mode=Mode.SUBTRACT)

    # F2_s51 → F2_t52 (revolve, cut)
    with BuildSketch(Plane.XZ.offset(-8.0163478851)):
        with BuildLine():
            ThreePointArc((55.9564799812, 16.8150565722), (58.4709516951, 22.8855282861), (64.541423409, 25.4))
            Line((64.541423409, 25.4), (55.9564799812, 25.4))
            Line((55.9564799812, 25.4), (55.9564799812, 16.8150565722))
        make_face()
    revolve(axis=Axis((33.6687006056, 8.0163478851, 25.4), (0, 0, 1)), mode=Mode.SUBTRACT)


solid = f1_6.part
